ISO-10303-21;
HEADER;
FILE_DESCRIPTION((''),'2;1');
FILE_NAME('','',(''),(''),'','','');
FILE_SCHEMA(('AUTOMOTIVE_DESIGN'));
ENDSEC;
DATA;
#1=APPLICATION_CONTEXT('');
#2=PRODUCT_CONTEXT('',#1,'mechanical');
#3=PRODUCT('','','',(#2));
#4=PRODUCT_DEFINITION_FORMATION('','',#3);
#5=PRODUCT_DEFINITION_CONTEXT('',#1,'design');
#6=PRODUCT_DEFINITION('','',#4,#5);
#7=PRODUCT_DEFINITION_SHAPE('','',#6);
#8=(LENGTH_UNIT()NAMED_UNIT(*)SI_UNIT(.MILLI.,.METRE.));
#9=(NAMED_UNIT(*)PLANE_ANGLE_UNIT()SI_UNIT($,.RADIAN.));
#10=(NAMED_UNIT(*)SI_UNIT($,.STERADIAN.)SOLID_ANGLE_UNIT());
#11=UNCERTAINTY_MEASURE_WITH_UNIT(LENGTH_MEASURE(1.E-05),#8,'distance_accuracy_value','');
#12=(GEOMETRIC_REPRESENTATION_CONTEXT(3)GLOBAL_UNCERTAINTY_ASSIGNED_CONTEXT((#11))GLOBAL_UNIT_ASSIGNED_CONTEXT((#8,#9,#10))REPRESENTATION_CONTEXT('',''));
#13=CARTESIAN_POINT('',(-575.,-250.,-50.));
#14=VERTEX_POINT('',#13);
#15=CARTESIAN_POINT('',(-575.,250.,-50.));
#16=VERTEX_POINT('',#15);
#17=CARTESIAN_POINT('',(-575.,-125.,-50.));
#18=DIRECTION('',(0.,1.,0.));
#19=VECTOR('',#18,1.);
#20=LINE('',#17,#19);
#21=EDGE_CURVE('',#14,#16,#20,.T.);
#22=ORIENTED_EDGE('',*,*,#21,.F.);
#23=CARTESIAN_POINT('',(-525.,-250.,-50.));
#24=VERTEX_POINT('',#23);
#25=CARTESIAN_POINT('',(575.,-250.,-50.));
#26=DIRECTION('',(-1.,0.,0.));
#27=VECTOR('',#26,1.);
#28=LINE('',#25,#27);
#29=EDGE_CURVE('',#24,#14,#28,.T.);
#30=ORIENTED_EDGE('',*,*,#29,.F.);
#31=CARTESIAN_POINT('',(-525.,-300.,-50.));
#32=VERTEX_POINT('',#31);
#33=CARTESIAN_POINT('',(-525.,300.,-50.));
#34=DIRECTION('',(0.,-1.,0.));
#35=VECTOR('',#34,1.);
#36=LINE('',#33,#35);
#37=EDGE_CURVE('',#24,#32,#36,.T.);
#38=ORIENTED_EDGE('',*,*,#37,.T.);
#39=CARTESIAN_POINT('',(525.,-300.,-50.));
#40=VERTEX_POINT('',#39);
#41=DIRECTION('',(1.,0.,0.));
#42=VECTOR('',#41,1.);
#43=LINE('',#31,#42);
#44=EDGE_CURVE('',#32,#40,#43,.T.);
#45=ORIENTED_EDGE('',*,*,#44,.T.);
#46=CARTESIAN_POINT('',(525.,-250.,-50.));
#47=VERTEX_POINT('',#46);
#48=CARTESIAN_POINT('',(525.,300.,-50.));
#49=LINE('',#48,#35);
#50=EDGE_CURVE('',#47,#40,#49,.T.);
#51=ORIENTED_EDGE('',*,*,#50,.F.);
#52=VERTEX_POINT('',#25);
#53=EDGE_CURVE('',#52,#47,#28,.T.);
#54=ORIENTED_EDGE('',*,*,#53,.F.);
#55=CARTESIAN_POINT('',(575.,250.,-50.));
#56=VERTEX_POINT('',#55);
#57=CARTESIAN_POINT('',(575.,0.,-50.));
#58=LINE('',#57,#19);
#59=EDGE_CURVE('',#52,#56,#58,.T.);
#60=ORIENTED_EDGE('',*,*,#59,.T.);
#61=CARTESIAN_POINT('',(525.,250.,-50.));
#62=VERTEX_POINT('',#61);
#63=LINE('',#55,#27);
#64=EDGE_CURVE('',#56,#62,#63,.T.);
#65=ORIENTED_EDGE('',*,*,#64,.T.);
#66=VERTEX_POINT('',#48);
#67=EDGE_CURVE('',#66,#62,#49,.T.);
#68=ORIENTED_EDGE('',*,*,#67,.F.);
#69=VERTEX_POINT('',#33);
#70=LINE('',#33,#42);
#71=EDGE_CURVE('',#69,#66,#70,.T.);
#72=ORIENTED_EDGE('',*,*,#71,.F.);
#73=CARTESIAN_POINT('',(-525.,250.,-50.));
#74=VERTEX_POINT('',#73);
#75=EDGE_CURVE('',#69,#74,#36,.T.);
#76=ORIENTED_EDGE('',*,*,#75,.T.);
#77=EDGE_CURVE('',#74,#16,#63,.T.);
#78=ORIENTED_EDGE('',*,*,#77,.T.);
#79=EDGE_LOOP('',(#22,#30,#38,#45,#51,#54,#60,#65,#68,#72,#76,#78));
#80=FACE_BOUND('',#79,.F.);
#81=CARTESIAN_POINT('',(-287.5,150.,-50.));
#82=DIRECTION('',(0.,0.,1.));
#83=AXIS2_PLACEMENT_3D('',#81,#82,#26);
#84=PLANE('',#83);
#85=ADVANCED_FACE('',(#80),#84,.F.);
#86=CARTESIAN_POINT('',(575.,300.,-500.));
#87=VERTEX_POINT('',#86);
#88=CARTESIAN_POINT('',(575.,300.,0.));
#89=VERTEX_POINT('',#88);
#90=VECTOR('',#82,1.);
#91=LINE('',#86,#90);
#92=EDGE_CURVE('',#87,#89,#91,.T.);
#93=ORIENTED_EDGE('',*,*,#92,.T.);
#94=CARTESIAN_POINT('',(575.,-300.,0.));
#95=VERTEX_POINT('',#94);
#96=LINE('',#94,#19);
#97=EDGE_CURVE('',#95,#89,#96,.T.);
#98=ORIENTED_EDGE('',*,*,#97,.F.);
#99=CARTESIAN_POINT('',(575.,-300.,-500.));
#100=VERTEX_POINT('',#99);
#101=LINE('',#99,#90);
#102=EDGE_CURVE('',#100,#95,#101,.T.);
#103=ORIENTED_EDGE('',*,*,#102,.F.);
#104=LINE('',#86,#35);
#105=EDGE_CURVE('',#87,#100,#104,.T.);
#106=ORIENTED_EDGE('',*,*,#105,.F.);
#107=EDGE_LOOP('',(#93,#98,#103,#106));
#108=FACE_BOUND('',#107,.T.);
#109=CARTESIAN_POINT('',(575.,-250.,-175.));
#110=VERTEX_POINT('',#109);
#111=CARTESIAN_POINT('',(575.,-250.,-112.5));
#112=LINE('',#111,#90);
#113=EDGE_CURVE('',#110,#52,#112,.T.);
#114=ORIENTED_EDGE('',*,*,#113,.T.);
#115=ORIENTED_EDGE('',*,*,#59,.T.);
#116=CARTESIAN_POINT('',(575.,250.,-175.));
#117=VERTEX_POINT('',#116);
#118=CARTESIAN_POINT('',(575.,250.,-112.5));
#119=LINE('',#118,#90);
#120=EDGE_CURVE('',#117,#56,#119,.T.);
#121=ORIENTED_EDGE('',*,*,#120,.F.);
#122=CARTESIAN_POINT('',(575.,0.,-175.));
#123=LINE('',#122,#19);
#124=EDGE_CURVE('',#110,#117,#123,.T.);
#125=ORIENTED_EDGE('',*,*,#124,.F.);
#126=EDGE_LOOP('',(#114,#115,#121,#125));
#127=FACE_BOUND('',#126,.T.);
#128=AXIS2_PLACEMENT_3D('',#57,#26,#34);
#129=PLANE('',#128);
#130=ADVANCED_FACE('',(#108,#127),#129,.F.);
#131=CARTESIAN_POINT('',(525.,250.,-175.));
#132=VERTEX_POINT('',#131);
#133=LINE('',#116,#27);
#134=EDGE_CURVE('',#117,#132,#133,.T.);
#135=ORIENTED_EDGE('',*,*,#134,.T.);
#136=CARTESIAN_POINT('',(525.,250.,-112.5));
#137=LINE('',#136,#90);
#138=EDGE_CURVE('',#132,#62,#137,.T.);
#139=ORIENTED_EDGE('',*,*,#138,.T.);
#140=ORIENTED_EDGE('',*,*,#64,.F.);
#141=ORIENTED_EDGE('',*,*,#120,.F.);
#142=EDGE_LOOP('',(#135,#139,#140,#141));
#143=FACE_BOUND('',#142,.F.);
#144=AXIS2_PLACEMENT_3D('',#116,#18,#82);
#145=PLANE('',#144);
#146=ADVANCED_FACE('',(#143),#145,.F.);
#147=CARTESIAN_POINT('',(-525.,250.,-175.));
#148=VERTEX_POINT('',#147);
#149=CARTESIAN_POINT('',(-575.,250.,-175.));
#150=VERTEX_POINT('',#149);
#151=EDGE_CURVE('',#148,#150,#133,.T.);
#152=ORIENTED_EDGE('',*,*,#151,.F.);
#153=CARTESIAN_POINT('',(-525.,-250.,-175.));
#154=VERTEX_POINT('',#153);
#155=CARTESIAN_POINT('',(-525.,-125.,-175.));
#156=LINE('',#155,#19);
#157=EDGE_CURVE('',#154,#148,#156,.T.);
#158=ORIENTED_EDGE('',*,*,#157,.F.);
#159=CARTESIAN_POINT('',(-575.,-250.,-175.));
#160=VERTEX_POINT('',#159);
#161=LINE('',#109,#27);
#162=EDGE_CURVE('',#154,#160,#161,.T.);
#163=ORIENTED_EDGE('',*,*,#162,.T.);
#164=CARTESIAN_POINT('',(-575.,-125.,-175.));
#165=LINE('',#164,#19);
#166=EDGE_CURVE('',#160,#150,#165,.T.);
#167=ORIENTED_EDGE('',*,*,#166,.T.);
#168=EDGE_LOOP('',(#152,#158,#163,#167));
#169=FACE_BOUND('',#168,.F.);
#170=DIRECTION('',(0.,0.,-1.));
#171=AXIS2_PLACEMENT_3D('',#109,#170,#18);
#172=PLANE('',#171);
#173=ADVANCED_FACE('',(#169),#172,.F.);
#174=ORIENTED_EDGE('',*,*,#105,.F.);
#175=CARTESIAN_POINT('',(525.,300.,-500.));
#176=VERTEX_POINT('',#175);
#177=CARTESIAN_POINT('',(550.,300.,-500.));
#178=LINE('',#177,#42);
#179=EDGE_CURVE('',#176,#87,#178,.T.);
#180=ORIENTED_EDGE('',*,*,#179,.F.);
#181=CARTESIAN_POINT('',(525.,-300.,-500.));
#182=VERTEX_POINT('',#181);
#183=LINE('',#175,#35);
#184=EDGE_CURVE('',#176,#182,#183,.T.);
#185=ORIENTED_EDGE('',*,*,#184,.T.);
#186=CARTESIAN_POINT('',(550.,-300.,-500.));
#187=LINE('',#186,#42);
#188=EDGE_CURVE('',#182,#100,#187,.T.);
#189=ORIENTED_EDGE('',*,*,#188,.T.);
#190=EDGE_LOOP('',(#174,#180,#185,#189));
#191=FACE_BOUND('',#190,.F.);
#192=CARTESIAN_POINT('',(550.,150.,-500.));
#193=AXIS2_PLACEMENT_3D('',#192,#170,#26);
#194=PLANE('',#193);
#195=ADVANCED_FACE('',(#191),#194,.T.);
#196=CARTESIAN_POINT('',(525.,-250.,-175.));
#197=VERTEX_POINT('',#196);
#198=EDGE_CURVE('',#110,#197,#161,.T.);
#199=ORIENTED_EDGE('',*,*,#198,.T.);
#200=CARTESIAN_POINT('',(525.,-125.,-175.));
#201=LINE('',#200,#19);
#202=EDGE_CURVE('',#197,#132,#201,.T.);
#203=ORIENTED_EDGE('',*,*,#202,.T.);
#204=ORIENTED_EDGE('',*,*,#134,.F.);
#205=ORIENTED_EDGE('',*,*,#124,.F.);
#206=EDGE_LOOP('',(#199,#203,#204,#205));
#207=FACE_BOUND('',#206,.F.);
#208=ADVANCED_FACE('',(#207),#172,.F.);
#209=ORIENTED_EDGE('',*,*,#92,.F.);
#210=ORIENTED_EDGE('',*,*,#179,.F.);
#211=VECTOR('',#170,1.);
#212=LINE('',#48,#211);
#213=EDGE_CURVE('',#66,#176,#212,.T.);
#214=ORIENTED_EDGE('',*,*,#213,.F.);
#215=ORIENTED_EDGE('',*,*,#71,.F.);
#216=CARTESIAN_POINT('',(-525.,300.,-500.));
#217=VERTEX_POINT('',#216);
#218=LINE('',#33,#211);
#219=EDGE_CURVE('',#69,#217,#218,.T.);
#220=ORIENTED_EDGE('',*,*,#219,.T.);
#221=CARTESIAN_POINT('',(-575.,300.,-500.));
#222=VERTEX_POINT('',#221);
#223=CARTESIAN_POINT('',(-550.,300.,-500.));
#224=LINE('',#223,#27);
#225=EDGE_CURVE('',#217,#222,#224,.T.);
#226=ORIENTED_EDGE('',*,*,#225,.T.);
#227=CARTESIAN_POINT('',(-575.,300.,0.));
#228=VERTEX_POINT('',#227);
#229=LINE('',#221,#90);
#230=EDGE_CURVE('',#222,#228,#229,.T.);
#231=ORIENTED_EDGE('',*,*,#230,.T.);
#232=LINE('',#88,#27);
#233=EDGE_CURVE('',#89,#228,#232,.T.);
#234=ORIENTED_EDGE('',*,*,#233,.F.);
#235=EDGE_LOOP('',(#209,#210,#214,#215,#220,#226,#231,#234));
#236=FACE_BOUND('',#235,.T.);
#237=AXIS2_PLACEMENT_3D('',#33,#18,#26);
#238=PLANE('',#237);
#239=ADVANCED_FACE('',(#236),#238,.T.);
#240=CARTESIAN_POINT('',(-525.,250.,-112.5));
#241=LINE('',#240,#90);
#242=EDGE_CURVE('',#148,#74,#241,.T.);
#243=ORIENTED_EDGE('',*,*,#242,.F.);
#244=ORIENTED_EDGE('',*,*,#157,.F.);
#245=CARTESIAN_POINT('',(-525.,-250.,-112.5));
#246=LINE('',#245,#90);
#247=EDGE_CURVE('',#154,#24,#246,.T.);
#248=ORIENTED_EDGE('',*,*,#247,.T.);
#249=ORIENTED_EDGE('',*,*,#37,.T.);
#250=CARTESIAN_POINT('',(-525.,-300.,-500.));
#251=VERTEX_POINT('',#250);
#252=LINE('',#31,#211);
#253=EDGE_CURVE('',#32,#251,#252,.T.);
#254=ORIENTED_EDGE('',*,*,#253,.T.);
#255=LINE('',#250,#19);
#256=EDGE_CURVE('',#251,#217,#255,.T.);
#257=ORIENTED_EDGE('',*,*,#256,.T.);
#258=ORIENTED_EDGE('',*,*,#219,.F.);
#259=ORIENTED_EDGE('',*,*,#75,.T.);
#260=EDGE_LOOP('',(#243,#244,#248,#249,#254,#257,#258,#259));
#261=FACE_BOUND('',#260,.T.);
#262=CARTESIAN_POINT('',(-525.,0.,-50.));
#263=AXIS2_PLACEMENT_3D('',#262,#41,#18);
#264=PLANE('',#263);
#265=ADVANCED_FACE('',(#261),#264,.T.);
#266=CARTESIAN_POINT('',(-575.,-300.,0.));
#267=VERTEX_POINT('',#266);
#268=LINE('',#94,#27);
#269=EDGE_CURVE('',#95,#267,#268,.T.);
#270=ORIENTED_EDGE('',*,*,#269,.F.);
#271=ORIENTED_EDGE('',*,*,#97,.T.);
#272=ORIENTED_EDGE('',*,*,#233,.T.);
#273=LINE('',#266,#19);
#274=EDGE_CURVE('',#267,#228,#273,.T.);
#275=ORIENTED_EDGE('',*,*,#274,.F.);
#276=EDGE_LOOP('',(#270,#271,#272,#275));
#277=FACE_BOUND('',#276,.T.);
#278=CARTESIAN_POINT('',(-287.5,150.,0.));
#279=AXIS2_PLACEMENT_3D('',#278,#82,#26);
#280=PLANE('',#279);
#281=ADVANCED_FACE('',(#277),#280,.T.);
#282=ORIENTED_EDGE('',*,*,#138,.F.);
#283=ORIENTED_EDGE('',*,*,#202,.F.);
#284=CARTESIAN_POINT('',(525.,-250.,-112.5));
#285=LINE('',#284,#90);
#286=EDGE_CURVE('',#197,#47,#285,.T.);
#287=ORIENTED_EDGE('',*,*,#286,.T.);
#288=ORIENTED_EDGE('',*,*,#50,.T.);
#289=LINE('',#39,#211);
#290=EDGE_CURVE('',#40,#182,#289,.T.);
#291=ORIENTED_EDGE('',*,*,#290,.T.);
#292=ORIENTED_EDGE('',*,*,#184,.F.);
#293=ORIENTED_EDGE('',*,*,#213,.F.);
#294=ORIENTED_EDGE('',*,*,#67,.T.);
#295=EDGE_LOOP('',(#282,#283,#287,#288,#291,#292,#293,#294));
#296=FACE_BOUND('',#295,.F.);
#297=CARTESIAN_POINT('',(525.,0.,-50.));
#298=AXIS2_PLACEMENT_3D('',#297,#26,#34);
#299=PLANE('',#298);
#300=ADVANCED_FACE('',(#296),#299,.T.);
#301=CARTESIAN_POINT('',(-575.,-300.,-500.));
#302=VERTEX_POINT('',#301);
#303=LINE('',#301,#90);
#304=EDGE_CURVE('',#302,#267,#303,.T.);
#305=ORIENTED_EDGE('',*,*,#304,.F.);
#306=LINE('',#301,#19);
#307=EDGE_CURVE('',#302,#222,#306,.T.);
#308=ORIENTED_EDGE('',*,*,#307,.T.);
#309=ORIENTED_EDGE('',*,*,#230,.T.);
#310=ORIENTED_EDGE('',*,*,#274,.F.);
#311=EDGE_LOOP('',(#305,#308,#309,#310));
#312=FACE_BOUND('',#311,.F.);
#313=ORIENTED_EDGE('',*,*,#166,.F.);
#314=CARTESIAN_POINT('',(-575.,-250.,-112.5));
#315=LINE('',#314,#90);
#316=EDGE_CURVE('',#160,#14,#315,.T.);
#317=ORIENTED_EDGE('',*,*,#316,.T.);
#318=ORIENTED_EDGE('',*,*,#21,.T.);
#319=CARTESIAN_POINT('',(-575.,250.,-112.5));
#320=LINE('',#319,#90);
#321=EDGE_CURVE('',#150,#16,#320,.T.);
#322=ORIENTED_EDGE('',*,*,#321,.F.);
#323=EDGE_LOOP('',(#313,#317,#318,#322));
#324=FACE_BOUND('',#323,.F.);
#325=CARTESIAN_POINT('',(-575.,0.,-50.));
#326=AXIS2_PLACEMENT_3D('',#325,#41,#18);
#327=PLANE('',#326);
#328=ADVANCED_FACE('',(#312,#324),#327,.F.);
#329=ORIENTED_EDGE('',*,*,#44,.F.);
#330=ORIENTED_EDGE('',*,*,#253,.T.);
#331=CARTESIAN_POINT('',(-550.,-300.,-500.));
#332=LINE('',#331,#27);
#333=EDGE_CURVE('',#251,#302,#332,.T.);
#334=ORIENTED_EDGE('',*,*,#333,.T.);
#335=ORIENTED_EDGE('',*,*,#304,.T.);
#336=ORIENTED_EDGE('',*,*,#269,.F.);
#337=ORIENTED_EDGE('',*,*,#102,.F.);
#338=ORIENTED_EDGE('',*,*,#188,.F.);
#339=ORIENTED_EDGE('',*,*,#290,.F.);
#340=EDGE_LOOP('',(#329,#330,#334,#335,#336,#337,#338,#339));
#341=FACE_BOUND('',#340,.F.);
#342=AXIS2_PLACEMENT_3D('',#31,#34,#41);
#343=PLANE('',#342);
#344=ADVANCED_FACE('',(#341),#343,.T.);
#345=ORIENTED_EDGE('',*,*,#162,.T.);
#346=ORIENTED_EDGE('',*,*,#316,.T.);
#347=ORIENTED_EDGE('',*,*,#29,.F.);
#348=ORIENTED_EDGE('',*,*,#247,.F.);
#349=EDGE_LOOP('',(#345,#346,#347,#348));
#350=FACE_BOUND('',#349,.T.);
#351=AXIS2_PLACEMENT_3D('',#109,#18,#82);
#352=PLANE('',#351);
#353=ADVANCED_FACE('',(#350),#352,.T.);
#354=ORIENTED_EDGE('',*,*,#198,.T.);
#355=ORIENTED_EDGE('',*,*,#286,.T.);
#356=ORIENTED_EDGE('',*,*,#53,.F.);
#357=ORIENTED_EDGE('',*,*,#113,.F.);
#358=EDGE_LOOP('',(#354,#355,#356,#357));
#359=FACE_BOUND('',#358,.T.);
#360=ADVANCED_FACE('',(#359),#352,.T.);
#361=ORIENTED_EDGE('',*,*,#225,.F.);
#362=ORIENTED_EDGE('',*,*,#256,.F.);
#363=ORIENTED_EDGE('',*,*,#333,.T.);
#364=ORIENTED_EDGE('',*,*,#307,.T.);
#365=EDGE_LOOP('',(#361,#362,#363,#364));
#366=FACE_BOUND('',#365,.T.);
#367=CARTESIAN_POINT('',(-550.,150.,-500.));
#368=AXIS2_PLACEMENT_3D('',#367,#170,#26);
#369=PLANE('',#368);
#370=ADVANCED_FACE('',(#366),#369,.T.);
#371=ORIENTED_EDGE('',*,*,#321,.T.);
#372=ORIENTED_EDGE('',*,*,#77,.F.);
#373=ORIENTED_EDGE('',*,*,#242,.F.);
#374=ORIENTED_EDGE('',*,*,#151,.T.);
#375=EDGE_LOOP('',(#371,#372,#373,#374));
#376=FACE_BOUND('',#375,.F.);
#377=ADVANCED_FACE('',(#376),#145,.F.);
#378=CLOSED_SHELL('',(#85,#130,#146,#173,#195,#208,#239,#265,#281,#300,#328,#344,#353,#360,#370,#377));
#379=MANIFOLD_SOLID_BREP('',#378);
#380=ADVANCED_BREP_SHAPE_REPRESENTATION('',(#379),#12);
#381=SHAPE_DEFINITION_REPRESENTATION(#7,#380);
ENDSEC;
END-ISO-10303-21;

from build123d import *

# Parameters (mm, degrees)
F0_W     = 575
F0_H     = 300
F1_DEPTH = 50
F2_W     = 50
F2_H     = 300
F3_DEPTH = 450
F5_DEPTH = 50
F8_W     = 500
F8_H     = 125
F9_DEPTH = 1150.001


# Not quite as in the source:
# - a feature of the source that left no trace in its solid (it failed there, or was rolled back) is left out


with BuildPart() as f1:
    # F0 (on Top) → F1 (new body)
    with BuildSketch(Plane.XY):
        with Locations((287.5, -150)):
            Rectangle(F0_W, F0_H)
    extrude(amount=-F1_DEPTH)

    # F2 (on face) → F3 (join)
    with BuildSketch(Plane(origin=(0, 0, -50), x_dir=(1, 0, 0), z_dir=(0, 0, -1))):
        with Locations((550, 150)):
            Rectangle(F2_W, F2_H)
    extrude(amount=F3_DEPTH)

    # F4 (on face) → F5 (join, through all)
    with BuildSketch(Plane.YZ.offset(575)):
        Polygon((50, -30), (0, -80), (0, -150.7106781187), (120.7106781187, -30), align=None)
    extrude(amount=-F5_DEPTH)

    # F6: F1 across plane


with BuildPart() as f1_1:
    add(f1.part)
    add(f1.part.mirror(Plane.YZ))

    # F7: F1 across plane


with BuildPart() as f1_2:
    add(f1_1.part)
    add(f1_1.part.mirror(Plane.XZ))

    # F8 (on face) → F9 (cut, through all)
    with BuildSketch(Plane.YZ.offset(575)):
        with Locations((0, -112.5)):
            Rectangle(F8_W, F8_H)
    extrude(amount=-F9_DEPTH, mode=Mode.SUBTRACT)


solid = f1_2.part
